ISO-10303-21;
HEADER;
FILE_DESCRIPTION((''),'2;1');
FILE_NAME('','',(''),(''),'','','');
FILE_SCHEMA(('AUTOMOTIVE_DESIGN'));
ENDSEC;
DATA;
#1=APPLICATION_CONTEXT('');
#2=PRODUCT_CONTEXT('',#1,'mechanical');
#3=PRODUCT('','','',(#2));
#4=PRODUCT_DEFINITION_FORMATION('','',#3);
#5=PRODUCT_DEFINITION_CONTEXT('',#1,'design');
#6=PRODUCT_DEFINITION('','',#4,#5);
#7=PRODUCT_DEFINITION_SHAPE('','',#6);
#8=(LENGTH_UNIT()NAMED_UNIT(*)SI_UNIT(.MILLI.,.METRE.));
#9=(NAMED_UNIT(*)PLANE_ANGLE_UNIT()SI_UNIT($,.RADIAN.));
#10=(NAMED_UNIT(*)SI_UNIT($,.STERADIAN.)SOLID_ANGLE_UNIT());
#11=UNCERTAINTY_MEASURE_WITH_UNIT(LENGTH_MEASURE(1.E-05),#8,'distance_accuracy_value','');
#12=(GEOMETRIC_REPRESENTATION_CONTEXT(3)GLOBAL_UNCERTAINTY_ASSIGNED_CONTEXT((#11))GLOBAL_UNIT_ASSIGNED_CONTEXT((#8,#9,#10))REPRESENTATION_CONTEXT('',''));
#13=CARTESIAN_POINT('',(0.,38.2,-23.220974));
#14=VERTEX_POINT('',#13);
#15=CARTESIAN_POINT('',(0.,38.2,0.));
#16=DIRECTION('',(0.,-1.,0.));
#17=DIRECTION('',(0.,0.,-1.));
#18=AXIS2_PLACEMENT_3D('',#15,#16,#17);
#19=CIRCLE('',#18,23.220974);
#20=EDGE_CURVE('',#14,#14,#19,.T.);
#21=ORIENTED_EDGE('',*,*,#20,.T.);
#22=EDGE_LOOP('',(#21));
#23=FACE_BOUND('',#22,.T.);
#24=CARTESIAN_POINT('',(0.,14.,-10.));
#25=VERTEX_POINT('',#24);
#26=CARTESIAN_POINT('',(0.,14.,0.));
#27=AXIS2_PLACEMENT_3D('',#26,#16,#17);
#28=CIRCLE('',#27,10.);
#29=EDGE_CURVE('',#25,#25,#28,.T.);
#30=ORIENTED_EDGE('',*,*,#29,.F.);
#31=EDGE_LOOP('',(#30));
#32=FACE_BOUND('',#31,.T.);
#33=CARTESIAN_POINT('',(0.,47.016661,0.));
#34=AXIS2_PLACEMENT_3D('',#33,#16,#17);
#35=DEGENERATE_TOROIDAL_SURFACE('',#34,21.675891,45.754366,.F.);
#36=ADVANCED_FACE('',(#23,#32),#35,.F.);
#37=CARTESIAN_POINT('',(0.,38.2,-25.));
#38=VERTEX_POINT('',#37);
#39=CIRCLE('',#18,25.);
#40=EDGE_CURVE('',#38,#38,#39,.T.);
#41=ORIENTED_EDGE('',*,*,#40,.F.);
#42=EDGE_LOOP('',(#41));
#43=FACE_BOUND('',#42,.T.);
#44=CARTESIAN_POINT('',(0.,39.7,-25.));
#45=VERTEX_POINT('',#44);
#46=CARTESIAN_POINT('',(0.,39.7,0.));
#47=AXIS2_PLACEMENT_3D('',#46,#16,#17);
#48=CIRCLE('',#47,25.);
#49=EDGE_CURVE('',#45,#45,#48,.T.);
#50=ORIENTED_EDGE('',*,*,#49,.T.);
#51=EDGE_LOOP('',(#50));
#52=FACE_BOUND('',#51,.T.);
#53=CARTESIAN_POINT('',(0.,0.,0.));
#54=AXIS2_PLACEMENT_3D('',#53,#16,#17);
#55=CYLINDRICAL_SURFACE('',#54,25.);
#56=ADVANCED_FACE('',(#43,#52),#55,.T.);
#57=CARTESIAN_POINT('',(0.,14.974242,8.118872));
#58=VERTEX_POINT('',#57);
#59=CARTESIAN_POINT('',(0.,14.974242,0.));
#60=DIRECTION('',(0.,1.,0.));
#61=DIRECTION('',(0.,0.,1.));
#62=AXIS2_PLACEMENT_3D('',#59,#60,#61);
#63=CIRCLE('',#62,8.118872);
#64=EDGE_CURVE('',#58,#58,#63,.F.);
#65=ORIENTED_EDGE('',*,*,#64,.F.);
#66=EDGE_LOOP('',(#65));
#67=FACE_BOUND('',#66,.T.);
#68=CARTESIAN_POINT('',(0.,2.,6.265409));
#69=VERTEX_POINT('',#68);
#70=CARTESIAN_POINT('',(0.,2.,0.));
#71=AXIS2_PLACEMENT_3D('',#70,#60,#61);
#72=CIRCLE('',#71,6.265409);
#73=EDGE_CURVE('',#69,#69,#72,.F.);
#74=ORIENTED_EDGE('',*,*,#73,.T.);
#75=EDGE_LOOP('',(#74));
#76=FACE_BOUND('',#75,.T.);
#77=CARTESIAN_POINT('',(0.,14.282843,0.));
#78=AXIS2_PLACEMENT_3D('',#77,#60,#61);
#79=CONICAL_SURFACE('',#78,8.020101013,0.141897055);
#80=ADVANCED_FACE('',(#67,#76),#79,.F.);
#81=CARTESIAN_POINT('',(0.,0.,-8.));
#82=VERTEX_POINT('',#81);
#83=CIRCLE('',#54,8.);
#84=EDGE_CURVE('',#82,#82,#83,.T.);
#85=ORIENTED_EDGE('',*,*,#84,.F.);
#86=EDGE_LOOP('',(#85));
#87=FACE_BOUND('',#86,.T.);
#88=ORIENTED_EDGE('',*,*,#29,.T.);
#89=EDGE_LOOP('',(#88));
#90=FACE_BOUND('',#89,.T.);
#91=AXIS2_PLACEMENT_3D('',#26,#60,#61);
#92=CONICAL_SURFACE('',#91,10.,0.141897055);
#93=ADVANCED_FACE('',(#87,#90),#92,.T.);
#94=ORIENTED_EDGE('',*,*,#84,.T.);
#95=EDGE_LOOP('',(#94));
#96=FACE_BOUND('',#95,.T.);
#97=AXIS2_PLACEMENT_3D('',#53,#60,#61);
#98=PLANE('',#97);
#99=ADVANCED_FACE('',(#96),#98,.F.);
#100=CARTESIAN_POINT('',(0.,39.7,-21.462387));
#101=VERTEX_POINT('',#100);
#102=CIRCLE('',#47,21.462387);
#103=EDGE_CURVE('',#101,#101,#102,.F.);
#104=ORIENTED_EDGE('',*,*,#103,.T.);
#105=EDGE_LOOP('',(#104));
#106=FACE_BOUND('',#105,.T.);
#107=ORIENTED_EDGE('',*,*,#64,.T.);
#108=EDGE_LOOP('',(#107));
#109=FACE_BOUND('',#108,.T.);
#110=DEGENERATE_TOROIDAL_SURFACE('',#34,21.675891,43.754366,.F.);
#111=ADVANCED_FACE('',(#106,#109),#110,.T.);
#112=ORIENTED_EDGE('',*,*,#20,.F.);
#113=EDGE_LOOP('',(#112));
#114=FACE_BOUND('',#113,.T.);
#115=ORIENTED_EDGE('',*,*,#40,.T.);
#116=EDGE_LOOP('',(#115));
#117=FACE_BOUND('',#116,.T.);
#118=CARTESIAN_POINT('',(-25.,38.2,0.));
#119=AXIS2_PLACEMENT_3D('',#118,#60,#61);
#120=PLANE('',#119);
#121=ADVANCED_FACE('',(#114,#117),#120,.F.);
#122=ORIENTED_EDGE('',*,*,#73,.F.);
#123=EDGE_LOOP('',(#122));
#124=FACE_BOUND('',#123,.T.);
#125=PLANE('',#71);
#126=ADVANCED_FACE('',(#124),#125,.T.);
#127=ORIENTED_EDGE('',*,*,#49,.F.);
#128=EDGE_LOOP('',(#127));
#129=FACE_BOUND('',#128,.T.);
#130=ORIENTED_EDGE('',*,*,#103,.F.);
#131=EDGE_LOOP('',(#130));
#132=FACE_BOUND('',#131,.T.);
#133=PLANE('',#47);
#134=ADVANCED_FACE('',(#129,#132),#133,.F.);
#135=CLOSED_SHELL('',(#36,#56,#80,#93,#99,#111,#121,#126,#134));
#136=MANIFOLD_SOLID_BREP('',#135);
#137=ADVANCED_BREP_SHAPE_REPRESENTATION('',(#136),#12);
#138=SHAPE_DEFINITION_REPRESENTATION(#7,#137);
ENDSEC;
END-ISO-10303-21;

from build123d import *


# Read off the part's stored shape, not the designer's step: 抽壳1
with BuildPart() as part:
    # 草图3 → 旋转1 (revolve)
    with BuildSketch(Plane.XY, mode=Mode.PRIVATE) as revolve_1_sk:
        with BuildLine():
            Line((0, 0), (-8, 0))
            Line((-8, 0), (-10, 14))
            ThreePointArc((-10, 14), (-18.477025854, 25.080270137), (-23.220973783, 38.2))
            Line((-23.220973783, 38.2), (-25, 38.2))
            Line((-25, 38.2), (-25, 39.7))
            Line((-25, 39.7), (0, 39.7))
            Line((0, 39.7), (0, 0))
        make_face()
    revolve(revolve_1_sk.sketch.rotate(Axis((0, 0, 0), (0, 1, 0)), 270), axis=Axis((0, 0, 0), (0, 1, 0)))

    # 抽壳1 outline → 抽壳1 (revolve, cut)
    with BuildSketch(Plane.XY):
        with BuildLine():
            Line((6.265409197, 2), (8.118872407, 14.974242471))
            ThreePointArc((8.118872407, 14.974242471), (16.829276005, 26.23694427), (21.462386525, 39.7))
            Line((21.462386525, 39.7), (0, 39.7))
            Line((0, 39.7), (0, 2))
            Line((0, 2), (6.265409197, 2))
        make_face()
    revolve(axis=Axis((0, 0, 0), (0, 1, 0)), mode=Mode.SUBTRACT)


solid = part.part
